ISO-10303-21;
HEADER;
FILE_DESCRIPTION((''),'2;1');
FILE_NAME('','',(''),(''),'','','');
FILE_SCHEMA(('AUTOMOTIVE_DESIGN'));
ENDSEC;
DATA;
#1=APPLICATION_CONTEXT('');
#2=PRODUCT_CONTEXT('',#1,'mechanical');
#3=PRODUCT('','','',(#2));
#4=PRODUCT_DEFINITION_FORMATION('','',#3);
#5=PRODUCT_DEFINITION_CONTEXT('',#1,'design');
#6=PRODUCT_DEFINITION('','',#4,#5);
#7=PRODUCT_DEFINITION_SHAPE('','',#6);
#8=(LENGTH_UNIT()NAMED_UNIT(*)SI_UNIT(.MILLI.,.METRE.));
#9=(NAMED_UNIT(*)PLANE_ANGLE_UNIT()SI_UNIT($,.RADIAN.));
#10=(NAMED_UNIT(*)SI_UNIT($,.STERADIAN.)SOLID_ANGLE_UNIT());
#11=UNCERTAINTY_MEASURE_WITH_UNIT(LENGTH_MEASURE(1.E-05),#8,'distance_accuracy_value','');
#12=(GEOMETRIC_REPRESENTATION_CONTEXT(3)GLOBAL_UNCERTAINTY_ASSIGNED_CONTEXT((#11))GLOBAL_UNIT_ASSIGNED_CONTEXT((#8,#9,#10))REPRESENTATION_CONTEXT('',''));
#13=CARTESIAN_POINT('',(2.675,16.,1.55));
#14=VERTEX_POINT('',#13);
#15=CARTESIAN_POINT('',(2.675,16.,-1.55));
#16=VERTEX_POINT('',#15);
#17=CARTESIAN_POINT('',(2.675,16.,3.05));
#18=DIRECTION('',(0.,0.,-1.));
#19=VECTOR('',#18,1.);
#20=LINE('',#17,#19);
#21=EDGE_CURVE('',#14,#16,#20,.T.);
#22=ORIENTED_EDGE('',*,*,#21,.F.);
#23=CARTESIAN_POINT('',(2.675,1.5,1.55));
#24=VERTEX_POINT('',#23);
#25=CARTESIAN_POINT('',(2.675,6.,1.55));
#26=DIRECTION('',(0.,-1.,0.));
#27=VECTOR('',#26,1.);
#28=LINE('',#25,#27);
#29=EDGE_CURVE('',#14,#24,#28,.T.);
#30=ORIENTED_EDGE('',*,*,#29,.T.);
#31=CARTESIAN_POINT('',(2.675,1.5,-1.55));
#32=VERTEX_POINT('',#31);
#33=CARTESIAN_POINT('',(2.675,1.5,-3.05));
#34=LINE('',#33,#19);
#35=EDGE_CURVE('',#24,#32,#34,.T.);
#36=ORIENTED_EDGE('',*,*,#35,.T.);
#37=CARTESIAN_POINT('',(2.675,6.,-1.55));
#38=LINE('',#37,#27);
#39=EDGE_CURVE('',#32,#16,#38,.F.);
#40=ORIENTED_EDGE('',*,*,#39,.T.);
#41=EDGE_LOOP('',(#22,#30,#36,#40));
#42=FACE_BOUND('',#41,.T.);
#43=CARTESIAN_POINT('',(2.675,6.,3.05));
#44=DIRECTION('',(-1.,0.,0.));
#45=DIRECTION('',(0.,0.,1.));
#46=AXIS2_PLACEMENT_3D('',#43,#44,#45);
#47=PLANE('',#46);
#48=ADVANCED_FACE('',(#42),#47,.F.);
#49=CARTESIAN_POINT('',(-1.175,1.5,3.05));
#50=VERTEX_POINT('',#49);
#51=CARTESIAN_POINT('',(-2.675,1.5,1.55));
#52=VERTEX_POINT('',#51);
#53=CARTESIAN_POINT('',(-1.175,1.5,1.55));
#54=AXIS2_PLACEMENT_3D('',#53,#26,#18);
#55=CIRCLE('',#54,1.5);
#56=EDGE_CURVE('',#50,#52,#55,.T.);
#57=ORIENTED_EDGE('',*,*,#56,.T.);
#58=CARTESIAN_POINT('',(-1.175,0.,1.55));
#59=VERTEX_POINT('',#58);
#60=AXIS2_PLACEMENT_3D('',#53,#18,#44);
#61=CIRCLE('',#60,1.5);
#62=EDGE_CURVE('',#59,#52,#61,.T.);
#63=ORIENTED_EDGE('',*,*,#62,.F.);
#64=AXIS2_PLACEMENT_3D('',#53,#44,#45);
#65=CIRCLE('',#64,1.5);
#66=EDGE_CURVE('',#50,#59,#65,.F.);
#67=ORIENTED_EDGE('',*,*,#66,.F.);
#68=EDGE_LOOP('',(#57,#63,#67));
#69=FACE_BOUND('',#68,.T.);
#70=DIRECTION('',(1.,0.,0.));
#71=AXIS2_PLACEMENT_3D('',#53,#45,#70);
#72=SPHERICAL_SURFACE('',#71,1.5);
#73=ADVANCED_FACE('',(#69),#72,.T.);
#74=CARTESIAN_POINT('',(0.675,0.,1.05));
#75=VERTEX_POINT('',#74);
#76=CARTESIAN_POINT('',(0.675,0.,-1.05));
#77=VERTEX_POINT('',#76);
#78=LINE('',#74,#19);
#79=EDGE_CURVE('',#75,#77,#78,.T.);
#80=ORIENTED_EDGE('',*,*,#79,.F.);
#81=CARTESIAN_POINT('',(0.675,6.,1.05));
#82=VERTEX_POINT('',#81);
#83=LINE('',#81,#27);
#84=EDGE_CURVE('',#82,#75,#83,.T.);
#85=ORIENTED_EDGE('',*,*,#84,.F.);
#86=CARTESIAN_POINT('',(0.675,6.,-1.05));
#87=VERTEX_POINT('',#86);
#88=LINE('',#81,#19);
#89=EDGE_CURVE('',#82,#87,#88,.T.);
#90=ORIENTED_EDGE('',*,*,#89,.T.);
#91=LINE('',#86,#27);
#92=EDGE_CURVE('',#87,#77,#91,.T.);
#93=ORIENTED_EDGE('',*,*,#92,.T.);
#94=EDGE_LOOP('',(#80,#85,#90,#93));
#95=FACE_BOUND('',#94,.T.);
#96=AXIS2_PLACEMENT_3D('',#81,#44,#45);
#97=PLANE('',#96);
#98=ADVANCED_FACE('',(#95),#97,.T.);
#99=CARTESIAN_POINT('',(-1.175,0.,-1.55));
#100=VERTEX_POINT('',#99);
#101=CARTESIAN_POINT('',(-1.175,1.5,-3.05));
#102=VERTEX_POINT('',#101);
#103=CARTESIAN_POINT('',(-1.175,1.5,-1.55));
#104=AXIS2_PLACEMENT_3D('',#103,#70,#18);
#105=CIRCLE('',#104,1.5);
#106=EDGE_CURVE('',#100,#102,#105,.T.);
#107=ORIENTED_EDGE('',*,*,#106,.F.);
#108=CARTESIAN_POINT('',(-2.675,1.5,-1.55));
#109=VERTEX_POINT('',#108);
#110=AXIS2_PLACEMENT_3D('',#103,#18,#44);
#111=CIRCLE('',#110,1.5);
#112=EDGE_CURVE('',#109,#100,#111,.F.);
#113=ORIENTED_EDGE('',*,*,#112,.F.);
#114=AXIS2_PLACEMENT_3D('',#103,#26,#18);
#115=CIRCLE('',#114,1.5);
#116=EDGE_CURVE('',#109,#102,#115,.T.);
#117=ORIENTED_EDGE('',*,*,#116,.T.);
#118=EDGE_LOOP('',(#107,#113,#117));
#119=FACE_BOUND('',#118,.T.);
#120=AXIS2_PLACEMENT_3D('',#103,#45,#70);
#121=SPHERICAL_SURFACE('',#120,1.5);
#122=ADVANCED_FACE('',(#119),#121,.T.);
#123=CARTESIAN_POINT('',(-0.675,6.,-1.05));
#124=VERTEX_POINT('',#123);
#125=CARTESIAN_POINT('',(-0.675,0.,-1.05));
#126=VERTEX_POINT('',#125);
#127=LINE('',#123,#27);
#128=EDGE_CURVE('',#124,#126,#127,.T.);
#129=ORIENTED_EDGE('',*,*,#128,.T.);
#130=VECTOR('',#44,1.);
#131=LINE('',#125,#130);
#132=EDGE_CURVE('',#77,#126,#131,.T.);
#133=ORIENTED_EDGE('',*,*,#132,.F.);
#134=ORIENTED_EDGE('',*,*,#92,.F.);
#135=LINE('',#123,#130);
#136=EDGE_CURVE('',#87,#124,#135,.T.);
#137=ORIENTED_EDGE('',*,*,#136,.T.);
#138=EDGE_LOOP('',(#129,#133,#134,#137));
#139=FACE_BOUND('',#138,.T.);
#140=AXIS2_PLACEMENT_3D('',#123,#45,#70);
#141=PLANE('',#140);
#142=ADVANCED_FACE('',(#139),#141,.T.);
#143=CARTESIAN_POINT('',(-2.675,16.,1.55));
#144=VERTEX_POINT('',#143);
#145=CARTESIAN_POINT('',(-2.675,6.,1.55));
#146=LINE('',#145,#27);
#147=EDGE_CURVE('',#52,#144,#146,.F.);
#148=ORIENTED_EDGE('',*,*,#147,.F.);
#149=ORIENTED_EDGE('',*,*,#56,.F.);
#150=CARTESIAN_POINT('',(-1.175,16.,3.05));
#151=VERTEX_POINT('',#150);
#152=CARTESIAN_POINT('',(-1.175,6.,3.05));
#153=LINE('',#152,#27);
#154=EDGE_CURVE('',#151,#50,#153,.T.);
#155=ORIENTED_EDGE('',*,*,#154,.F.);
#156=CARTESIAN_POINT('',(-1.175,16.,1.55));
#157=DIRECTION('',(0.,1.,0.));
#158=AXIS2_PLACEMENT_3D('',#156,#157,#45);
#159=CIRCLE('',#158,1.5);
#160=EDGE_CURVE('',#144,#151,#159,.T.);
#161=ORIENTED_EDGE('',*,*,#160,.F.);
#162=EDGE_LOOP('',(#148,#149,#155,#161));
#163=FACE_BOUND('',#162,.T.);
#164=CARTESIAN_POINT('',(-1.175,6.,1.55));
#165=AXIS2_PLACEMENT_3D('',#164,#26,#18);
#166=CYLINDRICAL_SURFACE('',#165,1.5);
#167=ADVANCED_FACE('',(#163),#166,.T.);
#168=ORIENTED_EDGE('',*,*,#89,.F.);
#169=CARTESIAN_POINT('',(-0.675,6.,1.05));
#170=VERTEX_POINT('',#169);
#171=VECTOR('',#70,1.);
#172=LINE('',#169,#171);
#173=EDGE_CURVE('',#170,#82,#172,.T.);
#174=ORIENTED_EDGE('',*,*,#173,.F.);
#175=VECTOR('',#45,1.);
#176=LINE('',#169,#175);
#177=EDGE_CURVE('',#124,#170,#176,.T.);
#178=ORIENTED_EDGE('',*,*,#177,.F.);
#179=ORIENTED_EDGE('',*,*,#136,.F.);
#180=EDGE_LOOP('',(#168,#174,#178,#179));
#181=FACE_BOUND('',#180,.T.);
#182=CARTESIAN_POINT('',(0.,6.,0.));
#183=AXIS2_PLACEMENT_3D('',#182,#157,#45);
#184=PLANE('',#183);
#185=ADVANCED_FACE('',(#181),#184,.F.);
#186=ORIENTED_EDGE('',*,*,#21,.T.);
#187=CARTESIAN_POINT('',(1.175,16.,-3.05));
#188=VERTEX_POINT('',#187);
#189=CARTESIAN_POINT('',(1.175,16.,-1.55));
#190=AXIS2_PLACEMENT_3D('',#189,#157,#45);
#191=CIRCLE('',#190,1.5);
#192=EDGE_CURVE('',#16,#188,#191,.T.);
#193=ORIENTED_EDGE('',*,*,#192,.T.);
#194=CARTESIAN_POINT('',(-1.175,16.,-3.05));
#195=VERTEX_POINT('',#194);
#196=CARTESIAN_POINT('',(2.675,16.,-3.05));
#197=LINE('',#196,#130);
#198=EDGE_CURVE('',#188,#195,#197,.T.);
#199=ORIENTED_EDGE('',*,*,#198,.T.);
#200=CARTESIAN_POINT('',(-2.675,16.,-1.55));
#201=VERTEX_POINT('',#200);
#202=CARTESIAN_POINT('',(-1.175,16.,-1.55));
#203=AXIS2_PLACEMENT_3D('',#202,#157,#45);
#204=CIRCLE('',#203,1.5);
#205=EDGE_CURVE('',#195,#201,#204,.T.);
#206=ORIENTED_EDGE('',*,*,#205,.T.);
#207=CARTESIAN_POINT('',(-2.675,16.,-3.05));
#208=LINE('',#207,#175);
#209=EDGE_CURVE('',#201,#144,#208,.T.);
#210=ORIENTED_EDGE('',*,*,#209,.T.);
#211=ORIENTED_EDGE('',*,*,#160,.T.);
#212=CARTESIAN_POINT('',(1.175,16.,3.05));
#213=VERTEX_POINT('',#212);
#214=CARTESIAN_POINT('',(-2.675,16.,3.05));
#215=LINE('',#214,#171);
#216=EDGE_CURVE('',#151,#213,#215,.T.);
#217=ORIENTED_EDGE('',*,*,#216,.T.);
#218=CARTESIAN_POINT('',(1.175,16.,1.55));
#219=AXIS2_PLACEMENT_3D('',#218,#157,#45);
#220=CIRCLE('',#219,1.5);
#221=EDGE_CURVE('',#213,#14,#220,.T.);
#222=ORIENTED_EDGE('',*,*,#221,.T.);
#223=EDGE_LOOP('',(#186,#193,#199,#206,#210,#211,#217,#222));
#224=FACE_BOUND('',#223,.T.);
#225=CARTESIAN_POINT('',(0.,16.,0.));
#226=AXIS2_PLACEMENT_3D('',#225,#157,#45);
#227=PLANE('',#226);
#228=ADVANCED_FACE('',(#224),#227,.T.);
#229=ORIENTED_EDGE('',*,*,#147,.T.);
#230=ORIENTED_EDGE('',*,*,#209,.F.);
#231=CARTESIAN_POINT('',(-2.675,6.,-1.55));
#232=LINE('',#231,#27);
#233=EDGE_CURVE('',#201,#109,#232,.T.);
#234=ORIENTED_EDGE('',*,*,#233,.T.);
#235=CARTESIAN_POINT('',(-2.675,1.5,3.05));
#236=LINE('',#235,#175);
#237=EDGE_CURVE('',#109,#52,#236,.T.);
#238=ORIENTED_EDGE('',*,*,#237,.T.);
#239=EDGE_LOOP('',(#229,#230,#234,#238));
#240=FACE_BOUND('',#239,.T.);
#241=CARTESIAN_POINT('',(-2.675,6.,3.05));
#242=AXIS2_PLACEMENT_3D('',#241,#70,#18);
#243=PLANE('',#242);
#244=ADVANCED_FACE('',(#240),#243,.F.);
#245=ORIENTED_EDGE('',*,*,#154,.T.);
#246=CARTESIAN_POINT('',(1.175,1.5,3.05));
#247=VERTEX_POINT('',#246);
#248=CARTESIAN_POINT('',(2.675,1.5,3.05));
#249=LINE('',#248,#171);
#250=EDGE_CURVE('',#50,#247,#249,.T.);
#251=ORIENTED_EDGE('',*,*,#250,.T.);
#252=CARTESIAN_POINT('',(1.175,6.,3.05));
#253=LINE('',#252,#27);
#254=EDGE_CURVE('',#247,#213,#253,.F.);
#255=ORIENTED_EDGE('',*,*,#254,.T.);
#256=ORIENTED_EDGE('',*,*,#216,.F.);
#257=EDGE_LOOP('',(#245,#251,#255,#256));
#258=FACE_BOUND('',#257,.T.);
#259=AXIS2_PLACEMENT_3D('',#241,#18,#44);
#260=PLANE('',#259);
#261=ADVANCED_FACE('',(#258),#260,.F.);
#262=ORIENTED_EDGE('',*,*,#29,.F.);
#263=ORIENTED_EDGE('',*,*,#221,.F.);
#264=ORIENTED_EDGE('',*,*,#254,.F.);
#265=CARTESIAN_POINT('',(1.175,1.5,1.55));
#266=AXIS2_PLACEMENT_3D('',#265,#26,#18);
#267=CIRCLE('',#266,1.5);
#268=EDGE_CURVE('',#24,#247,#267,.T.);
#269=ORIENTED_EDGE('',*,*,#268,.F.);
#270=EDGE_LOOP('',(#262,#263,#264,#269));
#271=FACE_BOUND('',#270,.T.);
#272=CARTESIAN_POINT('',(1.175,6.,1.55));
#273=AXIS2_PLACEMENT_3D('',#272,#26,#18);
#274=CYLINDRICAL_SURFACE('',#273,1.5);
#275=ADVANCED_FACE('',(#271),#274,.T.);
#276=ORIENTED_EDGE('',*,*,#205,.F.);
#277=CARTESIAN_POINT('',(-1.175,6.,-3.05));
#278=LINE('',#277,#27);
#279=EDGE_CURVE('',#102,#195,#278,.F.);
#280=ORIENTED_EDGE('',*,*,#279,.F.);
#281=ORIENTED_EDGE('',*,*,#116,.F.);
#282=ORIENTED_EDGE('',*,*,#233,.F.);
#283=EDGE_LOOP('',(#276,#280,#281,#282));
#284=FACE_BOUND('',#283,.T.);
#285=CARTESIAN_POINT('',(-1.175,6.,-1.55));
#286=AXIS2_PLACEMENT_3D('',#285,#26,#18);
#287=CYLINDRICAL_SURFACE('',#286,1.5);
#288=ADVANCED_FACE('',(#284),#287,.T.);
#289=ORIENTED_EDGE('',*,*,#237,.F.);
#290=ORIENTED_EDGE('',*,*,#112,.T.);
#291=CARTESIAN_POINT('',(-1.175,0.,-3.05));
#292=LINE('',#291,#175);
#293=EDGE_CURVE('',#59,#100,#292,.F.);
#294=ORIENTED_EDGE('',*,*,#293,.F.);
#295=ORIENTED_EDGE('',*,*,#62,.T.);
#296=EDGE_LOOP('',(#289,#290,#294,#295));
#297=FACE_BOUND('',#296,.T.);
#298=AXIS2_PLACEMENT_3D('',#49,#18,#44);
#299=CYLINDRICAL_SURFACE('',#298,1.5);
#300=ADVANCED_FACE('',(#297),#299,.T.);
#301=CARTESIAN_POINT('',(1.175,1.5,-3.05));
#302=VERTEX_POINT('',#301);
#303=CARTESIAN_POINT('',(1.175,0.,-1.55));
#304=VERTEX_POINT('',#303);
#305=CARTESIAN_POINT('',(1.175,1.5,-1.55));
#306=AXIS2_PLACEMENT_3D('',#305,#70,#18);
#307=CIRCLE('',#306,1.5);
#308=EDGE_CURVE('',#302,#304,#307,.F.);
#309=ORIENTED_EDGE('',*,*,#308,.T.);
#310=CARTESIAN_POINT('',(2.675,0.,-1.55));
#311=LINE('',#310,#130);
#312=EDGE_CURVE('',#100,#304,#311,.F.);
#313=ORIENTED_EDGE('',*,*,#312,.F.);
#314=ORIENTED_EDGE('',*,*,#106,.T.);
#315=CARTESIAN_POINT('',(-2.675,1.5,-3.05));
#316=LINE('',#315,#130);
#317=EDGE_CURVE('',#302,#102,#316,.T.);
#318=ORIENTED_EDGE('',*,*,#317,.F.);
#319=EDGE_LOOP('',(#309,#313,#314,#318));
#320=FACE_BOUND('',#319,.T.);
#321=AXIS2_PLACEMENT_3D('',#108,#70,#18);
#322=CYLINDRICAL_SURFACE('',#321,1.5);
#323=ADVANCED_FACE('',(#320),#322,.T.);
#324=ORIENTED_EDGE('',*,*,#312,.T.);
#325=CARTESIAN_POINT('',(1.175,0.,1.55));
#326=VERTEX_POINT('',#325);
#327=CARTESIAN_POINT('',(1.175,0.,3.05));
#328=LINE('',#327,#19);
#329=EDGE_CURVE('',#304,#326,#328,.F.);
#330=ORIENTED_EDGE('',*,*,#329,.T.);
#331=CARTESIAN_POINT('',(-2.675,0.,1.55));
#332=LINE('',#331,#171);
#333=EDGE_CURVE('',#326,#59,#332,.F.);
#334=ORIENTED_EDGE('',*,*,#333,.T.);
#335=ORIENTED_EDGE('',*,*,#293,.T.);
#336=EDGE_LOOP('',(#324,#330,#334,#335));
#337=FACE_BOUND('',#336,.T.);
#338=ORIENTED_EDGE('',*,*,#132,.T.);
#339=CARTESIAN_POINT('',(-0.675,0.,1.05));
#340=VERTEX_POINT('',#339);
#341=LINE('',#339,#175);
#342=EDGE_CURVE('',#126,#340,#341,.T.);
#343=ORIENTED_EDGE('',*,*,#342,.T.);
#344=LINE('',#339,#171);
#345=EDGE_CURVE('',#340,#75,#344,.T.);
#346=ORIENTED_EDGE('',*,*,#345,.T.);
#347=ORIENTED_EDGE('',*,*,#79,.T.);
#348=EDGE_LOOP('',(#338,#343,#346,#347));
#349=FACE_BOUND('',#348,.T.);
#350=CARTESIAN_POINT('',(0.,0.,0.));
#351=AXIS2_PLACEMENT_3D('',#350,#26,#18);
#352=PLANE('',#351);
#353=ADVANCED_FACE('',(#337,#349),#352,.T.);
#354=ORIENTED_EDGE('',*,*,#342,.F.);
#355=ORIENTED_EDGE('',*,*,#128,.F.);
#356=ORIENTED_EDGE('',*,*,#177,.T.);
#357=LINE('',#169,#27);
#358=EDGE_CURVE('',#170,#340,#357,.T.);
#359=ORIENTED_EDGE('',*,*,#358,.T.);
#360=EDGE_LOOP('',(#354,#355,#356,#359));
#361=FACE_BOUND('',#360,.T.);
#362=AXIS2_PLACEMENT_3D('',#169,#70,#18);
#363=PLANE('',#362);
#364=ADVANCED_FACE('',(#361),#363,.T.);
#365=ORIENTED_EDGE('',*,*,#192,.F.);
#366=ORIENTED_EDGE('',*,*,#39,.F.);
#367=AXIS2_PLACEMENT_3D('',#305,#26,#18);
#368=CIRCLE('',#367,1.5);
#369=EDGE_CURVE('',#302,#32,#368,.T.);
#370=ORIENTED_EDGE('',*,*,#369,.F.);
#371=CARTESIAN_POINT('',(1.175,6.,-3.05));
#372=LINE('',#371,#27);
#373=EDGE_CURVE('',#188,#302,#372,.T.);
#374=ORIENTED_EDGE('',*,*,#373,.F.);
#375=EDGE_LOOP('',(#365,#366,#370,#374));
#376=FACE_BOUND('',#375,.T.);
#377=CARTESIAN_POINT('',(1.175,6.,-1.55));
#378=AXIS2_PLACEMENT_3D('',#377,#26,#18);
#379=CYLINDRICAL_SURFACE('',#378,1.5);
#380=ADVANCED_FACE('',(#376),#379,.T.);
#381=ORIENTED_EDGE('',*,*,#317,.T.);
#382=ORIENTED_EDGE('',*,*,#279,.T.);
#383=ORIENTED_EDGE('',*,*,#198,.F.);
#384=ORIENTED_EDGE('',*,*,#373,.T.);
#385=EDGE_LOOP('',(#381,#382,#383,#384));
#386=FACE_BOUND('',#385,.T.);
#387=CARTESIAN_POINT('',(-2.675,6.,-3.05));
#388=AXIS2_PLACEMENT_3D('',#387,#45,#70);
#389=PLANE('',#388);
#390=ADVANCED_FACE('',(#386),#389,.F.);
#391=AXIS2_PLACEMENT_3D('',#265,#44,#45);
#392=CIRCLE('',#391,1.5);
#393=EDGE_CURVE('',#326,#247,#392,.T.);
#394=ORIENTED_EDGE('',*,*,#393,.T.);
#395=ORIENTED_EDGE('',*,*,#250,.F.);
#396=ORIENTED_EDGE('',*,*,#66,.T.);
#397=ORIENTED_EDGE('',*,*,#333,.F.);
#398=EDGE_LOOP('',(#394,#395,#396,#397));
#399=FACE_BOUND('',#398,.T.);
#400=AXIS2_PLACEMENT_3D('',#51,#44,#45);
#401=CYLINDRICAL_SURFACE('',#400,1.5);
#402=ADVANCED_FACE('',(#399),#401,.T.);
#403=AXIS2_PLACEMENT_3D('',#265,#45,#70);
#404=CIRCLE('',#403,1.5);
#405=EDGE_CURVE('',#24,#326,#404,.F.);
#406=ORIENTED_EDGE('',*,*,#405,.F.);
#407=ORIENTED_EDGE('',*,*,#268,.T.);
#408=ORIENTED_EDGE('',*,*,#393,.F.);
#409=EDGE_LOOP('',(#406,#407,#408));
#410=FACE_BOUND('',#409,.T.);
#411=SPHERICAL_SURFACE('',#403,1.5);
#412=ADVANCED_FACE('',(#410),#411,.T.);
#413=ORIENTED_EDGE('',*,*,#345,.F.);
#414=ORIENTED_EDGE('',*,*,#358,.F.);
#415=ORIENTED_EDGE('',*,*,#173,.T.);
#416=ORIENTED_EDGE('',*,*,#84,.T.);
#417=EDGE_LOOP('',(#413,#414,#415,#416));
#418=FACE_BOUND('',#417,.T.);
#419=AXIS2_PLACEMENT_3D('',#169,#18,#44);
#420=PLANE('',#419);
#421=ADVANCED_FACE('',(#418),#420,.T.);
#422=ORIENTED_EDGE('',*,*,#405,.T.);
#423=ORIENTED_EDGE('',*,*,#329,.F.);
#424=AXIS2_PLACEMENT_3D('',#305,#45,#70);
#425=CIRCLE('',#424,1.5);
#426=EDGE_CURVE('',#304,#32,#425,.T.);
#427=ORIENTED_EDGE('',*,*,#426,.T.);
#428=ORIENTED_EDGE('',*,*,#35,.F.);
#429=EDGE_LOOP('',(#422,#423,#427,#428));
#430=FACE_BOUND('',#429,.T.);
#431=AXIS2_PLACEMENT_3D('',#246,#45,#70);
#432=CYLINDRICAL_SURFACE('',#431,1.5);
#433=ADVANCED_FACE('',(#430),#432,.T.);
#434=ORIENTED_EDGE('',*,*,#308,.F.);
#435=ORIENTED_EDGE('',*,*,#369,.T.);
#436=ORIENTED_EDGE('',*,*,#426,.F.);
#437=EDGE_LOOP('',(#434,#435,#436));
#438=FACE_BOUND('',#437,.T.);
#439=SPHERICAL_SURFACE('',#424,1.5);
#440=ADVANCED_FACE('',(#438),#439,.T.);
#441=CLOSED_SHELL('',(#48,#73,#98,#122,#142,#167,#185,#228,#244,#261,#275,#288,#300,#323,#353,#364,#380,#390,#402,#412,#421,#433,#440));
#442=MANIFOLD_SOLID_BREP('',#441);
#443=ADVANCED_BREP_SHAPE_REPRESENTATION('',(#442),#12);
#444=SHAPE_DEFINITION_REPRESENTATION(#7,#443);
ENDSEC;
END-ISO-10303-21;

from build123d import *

# Parameters (mm, degrees)
SKETCH1_W           = 5.35
SKETCH1_H           = 6.1
SKETCH1_W_2         = 1.35
SKETCH1_H_2         = 2.1
BOSS_EXTRUDE1_DEPTH = 6
SKETCH2_W           = 5.35
SKETCH2_H           = 6.1
BOSS_EXTRUDE2_DEPTH = 10
FILLET1_R           = 1.5
FILLET2_R           = 1.5


with BuildPart() as part:
    # Sketch1 → Boss-Extrude1 (new body)
    with BuildSketch(Plane(origin=(0, 0, 0), x_dir=(1, 0, 0), z_dir=(0, 1, 0))):
        Rectangle(SKETCH1_W, SKETCH1_H)
        Rectangle(SKETCH1_W_2, SKETCH1_H_2, mode=Mode.SUBTRACT)
    extrude(amount=BOSS_EXTRUDE1_DEPTH)

    # Sketch2 → Boss-Extrude2 (add)
    with BuildSketch(Plane(origin=(0, 6, 0), x_dir=(1, 0, 0), z_dir=(0, 1, 0))):
        Rectangle(SKETCH2_W, SKETCH2_H)
    extrude(amount=BOSS_EXTRUDE2_DEPTH)

    # Fillet1
    fillet1_edges = [part.edges().sort_by_distance(p)[0] for p in [
        (0, 0, -3.05),
        (2.675, 0, 0),
        (0, 0, 3.05),
        (-2.675, 0, 0),
    ]]
    fillet(fillet1_edges, radius=FILLET1_R)

    # Fillet2
    # the kernel refuses this fillet: 1.5 mm, written as the material it takes off along each edge
    with BuildSketch(Plane(origin=(1.175, 1.5, -1.55), x_dir=(1, 0, 0), z_dir=(0, 0, -1))) as fillet2_piece_1_section:
        Polygon((0, 0), (FILLET2_R, 0), (FILLET2_R, FILLET2_R), (0, FILLET2_R), align=None)
    fillet2_piece_1 = extrude(amount=FILLET2_R, mode=Mode.PRIVATE)
    fillet2_piece_1 = fillet2_piece_1 - Plane(origin=(1.175, 1.5, -1.55), x_dir=(-0.7071067811865475, 0.7071067811865475, 0), z_dir=(0, 0, -1)) * Sphere(FILLET2_R, mode=Mode.PRIVATE)
    add(fillet2_piece_1, mode=Mode.SUBTRACT)
    with BuildSketch(Plane(origin=(1.175, 1.5, 1.55), x_dir=(0, 0, 1), z_dir=(1, 0, 0))) as fillet2_piece_2_section:
        Polygon((0, 0), (FILLET2_R, 0), (FILLET2_R, FILLET2_R), (0, FILLET2_R), align=None)
    fillet2_piece_2 = extrude(amount=FILLET2_R, mode=Mode.PRIVATE)
    fillet2_piece_2 = fillet2_piece_2 - Plane(origin=(1.175, 1.5, 1.55), x_dir=(0, 0.7071067811865475, -0.7071067811865475), z_dir=(1, 0, 0)) * Sphere(FILLET2_R, mode=Mode.PRIVATE)
    add(fillet2_piece_2, mode=Mode.SUBTRACT)
    with BuildSketch(Plane(origin=(-1.175, 1.5, -1.55), x_dir=(-1, 0, 0), z_dir=(0, 0, -1))) as fillet2_piece_3_section:
        Polygon((0, 0), (FILLET2_R, 0), (FILLET2_R, -FILLET2_R), (0, -FILLET2_R), align=None)
    fillet2_piece_3 = extrude(amount=FILLET2_R, mode=Mode.PRIVATE)
    fillet2_piece_3 = fillet2_piece_3 - Plane(origin=(-1.175, 1.5, -1.55), x_dir=(0.7071067811865475, 0.7071067811865475, 0), z_dir=(0, 0, -1)) * Sphere(FILLET2_R, mode=Mode.PRIVATE)
    add(fillet2_piece_3, mode=Mode.SUBTRACT)
    with BuildSketch(Plane(origin=(-1.175, 1.5, 1.55), x_dir=(0, 0, 1), z_dir=(-1, 0, 0))) as fillet2_piece_4_section:
        Polygon((0, 0), (FILLET2_R, 0), (FILLET2_R, -FILLET2_R), (0, -FILLET2_R), align=None)
    fillet2_piece_4 = extrude(amount=FILLET2_R, mode=Mode.PRIVATE)
    fillet2_piece_4 = fillet2_piece_4 - Plane(origin=(-1.175, 1.5, 1.55), x_dir=(0, 0.7071067811865475, -0.7071067811865475), z_dir=(-1, 0, 0)) * Sphere(FILLET2_R, mode=Mode.PRIVATE)
    add(fillet2_piece_4, mode=Mode.SUBTRACT)
    with BuildSketch(Plane(origin=(-2.675, 1.5, -3.05), x_dir=(1, 0, 0), z_dir=(0, 1, 0)), Plane(origin=(2.675, 19.75, -3.05), x_dir=(-1, 0, 0), z_dir=(0, -1, 0)), Plane(origin=(2.675, 19.75, 3.05), x_dir=(0, 0, -1), z_dir=(0, -1, 0)), Plane(origin=(-2.675, 1.5, 3.05), x_dir=(0, 0, -1), z_dir=(0, 1, 0))) as fillet2_piece_5:
        with BuildLine():
            CenterArc((FILLET2_R, -FILLET2_R), FILLET2_R, 90, 90)
            Line((0, -FILLET2_R), (0, 0))
            Line((0, 0), (FILLET2_R, 0))
        make_face()
    extrude(amount=18.25, mode=Mode.SUBTRACT)


solid = part.part
